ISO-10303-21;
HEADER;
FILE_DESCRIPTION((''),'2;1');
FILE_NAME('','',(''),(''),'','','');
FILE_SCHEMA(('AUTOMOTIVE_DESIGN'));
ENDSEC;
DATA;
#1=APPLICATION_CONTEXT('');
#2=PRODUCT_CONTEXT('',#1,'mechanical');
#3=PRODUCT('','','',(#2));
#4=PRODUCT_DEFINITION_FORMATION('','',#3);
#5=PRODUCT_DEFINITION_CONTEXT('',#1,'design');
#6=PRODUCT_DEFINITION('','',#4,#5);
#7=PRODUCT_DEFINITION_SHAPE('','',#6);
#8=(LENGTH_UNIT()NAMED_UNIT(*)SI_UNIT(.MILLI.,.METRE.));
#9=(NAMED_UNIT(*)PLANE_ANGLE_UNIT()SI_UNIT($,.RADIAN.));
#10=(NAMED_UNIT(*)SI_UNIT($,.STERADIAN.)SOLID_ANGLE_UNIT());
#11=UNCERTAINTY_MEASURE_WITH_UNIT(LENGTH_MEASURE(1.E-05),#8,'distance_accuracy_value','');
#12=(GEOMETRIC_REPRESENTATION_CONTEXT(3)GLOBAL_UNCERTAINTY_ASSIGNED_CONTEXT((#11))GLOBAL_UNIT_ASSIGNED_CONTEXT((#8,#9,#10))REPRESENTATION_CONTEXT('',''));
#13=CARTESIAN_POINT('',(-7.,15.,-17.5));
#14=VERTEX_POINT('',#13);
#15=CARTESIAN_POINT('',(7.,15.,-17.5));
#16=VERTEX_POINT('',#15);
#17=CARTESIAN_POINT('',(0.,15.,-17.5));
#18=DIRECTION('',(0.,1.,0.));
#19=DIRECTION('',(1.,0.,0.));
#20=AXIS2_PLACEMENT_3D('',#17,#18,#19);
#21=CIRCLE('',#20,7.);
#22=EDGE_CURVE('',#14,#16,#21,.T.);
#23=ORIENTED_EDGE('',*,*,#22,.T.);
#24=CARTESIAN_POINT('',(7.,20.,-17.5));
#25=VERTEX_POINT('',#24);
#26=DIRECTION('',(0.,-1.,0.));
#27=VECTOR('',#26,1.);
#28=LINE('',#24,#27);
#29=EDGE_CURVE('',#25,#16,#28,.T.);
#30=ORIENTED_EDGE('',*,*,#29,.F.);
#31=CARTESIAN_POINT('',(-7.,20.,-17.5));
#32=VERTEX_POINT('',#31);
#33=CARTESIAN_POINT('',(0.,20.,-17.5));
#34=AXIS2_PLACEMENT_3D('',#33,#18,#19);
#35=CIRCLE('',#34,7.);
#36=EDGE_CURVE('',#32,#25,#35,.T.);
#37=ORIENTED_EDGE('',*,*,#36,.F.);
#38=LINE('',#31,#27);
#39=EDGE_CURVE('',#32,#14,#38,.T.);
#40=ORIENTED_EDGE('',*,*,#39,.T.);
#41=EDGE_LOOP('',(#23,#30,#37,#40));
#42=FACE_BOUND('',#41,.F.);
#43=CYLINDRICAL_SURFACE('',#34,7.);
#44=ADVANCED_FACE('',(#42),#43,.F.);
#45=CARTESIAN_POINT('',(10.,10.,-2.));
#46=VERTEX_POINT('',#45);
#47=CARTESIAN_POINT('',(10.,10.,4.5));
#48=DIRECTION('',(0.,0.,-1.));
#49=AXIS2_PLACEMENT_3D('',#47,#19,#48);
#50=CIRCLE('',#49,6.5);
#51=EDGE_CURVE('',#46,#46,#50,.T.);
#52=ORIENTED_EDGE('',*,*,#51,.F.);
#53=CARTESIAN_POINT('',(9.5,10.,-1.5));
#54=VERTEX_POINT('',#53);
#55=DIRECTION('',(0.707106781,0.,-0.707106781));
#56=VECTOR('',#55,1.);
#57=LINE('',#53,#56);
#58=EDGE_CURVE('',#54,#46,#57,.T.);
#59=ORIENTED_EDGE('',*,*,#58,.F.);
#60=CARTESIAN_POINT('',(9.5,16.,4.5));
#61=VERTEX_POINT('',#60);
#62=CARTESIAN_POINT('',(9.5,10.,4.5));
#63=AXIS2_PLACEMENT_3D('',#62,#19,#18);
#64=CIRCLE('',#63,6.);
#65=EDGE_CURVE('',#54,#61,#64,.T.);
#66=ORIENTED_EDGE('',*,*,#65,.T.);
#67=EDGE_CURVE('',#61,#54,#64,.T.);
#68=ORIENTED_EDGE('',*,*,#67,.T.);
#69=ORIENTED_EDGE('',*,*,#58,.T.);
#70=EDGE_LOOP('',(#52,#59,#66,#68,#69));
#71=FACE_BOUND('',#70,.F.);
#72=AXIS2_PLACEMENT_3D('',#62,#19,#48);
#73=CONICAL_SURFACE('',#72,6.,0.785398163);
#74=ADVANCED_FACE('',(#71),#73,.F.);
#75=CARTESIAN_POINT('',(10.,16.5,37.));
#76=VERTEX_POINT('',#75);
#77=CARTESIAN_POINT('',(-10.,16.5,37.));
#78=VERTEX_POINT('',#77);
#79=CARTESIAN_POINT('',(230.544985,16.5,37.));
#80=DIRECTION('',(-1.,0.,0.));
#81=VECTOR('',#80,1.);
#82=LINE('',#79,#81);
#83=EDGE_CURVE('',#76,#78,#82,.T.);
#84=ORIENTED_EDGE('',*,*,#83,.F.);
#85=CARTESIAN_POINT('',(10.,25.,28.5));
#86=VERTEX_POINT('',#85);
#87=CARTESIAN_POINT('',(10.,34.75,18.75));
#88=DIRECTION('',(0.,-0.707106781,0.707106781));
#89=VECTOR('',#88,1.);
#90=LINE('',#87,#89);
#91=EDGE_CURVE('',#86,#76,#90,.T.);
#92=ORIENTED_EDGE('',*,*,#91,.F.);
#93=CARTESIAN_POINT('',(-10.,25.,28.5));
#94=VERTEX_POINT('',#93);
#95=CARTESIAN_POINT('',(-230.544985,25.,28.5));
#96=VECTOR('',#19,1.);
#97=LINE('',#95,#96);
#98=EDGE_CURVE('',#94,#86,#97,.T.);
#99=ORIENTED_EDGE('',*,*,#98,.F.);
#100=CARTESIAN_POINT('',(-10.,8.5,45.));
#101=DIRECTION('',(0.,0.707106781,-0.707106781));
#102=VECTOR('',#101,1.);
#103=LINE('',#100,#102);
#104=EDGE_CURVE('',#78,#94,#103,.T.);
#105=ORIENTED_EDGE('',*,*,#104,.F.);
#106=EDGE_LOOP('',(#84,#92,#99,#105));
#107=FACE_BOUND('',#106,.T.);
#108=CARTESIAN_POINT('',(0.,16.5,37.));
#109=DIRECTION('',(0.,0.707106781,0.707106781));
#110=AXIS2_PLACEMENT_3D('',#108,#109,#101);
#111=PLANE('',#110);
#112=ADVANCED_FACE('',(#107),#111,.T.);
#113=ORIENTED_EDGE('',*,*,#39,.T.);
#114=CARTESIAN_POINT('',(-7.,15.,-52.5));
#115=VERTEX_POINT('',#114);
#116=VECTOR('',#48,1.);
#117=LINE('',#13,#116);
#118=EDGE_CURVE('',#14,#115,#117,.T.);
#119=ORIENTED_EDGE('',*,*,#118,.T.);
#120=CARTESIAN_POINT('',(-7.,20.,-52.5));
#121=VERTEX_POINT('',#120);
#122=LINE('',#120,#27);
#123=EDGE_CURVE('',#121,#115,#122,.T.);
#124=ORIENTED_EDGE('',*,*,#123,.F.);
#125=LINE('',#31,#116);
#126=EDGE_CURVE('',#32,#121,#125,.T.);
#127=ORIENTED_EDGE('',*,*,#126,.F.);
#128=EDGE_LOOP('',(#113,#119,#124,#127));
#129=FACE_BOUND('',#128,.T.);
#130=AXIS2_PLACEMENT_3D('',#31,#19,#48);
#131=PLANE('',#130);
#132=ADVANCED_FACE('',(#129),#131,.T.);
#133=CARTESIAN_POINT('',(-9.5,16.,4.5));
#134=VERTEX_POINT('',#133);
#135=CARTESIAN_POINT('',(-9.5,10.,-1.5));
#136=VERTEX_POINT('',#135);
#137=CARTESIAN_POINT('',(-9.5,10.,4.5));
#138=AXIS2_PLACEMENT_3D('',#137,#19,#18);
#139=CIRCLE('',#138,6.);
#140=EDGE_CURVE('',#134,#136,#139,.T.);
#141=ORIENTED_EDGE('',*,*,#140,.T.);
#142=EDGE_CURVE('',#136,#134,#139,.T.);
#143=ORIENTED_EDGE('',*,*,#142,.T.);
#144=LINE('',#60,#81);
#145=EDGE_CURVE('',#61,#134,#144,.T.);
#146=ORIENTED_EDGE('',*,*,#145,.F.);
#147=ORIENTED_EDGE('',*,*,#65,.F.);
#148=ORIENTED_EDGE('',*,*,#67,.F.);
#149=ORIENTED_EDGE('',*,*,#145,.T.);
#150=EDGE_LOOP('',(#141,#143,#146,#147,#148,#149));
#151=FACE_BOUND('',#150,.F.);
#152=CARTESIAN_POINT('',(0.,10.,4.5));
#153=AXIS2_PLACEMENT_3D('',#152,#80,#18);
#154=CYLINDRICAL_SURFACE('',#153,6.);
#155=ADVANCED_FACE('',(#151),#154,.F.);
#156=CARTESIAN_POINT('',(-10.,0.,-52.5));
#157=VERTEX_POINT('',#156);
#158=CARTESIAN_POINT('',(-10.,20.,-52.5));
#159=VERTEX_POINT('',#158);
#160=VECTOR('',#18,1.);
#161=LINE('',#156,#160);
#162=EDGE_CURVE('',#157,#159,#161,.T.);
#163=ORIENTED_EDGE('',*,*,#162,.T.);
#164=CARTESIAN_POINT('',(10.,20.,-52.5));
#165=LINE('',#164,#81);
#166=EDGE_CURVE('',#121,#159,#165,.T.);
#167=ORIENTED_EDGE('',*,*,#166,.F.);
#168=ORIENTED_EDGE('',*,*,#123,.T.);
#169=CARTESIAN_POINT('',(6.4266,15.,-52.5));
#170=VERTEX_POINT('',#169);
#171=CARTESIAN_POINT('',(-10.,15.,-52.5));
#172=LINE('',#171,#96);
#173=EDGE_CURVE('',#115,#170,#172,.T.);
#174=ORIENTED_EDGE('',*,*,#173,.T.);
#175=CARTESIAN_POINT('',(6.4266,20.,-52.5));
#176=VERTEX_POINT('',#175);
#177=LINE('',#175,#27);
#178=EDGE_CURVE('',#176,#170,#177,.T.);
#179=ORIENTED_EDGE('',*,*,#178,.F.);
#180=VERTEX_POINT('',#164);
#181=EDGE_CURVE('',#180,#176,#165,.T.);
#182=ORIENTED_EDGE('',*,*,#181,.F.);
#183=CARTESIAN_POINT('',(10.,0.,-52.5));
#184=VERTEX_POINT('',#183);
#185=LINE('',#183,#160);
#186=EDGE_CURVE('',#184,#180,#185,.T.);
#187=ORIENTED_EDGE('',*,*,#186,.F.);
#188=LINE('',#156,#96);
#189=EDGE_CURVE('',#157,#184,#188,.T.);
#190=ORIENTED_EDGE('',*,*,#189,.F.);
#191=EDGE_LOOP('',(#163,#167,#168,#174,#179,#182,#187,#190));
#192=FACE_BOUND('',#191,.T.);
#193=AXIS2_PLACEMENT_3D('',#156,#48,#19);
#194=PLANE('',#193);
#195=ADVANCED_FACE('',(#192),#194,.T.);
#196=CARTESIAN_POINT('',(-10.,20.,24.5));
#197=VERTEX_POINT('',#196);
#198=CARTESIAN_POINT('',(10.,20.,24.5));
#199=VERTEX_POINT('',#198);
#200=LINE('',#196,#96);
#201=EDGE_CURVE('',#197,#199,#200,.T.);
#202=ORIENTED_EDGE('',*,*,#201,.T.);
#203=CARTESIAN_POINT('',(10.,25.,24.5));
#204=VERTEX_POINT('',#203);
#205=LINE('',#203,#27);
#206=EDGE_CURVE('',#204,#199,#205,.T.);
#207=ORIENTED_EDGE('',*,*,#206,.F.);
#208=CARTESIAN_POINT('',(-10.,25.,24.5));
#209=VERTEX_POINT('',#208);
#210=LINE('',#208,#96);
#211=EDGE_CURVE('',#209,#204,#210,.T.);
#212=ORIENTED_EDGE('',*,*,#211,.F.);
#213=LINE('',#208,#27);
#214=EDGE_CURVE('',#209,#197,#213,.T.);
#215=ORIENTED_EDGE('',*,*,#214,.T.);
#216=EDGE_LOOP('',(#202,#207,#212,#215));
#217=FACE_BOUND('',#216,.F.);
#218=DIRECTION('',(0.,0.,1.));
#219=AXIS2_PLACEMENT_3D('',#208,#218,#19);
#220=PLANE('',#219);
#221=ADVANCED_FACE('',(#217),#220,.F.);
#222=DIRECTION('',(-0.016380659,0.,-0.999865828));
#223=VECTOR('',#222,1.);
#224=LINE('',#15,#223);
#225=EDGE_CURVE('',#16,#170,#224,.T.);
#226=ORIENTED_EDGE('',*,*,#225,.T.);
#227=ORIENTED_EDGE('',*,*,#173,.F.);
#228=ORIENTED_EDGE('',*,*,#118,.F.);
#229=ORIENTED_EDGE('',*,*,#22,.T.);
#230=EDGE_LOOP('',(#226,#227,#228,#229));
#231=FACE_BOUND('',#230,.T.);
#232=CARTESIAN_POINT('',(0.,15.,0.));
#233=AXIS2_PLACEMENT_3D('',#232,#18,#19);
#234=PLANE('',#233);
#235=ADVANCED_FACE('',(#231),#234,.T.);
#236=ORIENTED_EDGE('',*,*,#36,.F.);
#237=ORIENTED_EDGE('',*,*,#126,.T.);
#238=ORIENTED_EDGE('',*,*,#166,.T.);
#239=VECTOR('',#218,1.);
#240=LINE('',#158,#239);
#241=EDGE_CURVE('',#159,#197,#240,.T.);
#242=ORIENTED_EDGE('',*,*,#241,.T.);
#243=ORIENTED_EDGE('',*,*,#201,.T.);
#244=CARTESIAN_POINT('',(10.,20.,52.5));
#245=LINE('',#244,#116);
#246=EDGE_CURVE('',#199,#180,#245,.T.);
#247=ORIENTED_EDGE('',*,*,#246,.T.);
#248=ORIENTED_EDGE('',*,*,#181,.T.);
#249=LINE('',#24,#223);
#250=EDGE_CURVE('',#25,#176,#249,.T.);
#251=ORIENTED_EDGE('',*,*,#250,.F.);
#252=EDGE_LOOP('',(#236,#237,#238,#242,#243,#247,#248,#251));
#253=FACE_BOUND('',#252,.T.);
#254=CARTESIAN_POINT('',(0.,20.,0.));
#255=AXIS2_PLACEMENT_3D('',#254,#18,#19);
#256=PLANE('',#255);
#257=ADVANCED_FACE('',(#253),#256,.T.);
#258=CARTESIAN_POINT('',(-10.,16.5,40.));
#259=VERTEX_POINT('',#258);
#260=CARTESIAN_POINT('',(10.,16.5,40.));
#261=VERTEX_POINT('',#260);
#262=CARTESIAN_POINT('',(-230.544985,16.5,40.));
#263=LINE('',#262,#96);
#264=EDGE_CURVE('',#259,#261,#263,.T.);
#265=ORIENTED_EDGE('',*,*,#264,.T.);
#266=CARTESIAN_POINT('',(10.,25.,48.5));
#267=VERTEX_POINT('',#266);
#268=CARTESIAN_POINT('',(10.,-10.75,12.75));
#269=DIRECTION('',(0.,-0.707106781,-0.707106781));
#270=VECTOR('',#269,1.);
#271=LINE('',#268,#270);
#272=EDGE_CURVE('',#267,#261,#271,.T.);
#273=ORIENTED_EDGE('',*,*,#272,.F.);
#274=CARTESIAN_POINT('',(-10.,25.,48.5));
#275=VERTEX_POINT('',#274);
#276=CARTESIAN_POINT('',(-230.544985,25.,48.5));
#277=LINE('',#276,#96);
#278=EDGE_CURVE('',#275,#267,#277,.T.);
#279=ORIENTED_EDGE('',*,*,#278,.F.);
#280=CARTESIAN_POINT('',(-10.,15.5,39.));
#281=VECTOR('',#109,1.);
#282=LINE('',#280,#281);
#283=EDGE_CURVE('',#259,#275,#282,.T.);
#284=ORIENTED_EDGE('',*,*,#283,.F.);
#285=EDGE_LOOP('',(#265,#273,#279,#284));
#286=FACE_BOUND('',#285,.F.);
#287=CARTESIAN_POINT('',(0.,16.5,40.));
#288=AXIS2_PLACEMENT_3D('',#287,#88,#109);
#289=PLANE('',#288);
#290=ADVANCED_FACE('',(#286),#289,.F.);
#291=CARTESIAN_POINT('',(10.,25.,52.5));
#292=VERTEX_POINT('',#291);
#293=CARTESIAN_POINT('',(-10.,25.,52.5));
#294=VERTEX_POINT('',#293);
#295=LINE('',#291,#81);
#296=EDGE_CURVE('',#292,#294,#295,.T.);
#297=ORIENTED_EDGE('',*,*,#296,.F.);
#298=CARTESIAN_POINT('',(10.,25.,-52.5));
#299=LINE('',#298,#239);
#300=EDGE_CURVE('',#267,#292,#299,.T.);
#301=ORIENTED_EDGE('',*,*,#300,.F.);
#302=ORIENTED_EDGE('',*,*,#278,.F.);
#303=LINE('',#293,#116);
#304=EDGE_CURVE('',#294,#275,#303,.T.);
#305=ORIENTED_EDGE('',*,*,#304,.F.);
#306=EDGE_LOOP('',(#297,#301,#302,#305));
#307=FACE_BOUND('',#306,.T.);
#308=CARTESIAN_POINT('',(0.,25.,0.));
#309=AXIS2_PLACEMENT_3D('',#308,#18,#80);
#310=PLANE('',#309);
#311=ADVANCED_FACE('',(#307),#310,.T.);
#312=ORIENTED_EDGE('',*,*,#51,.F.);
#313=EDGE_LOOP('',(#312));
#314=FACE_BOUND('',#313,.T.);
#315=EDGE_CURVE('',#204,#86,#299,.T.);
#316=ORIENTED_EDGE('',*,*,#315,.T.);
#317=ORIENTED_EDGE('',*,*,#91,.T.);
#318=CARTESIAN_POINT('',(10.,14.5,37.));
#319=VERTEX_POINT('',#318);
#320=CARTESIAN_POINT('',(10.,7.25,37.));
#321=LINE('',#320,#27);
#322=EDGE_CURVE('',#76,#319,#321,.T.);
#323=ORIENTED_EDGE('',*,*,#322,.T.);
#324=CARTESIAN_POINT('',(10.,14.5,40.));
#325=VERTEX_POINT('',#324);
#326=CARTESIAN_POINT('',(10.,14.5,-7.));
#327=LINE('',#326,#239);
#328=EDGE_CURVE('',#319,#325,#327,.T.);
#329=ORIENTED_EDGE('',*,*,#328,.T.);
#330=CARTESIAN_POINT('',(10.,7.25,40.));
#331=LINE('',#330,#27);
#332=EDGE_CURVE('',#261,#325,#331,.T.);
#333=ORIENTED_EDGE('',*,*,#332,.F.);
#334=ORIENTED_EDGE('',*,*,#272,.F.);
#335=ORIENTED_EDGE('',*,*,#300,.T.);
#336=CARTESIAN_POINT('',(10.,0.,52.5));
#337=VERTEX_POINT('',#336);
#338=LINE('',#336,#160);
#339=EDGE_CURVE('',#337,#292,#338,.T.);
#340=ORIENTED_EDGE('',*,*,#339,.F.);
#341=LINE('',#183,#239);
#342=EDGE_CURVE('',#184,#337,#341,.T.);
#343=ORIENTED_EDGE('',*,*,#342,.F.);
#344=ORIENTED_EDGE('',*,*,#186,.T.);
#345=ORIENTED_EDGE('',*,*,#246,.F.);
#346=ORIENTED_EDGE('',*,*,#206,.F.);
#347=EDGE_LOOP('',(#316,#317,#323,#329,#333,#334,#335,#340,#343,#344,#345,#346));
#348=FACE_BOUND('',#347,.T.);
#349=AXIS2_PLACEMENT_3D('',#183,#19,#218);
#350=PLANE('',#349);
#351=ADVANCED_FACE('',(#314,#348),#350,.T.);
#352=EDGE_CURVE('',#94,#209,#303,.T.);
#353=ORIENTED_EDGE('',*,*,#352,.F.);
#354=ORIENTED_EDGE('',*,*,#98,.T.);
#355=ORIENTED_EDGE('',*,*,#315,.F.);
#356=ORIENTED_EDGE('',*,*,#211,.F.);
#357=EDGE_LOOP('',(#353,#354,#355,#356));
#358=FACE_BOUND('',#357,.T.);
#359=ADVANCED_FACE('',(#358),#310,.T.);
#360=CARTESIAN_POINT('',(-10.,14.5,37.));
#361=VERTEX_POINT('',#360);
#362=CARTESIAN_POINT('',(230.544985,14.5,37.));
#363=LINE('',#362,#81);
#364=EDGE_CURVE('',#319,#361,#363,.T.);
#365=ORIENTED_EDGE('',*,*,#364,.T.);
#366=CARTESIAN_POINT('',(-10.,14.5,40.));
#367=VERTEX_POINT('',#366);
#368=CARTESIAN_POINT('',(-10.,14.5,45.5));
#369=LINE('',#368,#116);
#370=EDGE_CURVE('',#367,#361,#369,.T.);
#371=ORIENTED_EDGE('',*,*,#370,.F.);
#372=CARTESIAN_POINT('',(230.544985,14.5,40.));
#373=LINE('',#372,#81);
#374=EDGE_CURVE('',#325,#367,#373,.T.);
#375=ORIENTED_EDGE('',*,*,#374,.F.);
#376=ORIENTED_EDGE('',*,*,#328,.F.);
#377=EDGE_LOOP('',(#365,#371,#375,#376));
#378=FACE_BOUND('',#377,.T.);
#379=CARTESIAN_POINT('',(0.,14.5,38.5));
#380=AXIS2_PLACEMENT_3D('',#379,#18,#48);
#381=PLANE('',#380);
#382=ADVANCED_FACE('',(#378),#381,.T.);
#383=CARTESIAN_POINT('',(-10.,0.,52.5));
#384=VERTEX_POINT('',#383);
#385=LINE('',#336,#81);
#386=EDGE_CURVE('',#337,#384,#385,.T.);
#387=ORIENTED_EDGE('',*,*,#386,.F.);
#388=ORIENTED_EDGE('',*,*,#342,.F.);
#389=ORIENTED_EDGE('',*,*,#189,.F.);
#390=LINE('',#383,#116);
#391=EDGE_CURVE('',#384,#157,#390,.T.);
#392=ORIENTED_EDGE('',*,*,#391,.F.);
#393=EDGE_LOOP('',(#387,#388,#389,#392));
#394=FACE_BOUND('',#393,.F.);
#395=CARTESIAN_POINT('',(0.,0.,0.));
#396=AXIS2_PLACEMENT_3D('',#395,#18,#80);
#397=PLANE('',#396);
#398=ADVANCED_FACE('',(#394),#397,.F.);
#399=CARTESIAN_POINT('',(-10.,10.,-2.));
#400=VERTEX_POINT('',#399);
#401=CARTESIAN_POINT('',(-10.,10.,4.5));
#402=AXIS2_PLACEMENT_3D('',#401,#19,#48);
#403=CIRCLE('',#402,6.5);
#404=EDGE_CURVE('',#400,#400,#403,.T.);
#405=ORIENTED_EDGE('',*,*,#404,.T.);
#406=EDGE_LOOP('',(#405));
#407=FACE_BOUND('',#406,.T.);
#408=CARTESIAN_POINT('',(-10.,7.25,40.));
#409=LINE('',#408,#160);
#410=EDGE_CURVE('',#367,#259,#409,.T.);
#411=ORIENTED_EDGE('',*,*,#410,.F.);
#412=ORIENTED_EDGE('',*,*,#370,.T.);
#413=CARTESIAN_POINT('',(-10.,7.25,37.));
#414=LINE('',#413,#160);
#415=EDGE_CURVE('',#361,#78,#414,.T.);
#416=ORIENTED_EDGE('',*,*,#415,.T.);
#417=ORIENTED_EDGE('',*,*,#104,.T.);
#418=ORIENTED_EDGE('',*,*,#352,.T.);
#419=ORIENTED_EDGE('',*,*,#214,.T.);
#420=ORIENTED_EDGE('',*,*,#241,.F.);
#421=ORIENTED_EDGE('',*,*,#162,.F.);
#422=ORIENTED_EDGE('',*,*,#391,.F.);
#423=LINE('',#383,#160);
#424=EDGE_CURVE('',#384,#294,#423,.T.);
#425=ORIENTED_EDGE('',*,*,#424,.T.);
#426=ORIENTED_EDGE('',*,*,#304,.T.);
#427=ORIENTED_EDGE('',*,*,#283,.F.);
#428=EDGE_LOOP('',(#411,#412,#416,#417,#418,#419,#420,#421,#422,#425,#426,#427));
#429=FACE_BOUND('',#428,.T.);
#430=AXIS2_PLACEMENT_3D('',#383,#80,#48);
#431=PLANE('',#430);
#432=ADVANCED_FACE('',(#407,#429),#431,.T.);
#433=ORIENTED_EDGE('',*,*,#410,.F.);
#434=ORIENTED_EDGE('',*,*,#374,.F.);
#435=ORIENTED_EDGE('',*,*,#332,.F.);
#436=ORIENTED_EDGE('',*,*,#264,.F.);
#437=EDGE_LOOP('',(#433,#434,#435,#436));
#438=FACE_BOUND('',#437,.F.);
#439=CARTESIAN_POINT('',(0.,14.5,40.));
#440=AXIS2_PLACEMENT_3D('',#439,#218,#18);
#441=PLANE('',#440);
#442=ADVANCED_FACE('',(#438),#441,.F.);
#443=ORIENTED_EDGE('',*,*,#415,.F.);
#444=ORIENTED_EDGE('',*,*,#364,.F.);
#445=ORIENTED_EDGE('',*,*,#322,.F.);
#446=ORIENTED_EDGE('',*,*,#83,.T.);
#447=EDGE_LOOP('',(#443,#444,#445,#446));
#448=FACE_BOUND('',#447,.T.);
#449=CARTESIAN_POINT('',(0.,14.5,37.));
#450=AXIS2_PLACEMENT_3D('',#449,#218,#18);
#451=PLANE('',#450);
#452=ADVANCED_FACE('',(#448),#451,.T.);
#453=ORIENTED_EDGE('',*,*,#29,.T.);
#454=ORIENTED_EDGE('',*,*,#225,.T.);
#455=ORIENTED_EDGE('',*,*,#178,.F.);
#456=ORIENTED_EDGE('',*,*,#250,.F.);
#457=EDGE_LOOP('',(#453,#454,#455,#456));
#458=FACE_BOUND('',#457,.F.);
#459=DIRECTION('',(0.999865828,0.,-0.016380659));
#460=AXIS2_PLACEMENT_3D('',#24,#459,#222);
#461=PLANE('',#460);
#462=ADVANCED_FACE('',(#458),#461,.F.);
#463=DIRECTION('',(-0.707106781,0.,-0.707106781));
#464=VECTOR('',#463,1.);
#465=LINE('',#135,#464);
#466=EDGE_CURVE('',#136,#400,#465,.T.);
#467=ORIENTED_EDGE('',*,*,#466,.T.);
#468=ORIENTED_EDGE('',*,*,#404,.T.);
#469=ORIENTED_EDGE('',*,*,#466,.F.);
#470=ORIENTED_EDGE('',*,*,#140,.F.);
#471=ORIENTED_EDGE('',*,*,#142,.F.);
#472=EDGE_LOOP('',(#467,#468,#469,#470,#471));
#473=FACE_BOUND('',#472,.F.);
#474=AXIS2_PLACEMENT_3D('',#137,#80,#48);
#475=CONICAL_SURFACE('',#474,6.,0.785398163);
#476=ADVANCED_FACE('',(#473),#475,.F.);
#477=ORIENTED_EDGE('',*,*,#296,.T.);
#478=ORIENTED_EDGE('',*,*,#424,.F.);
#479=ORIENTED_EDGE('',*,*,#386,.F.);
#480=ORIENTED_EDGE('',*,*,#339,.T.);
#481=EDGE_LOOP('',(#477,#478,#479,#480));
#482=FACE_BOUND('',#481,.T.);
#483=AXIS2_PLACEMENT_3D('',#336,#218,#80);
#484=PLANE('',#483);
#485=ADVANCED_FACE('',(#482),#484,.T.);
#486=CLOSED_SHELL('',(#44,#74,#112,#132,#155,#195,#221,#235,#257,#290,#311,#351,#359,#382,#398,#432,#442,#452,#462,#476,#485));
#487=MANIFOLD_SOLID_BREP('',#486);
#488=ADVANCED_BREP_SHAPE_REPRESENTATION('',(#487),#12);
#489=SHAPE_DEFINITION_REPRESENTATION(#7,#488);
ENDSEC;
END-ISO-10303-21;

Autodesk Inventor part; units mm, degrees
ref_plane "YZ Plane" through (0, 0, 0) normal (1, 0, 0) x (0, 1, 0)
ref_plane "XY Plane" through (0, 0, 0) normal (0, 0, 1) x (1, 0, 0)
sketch "草图1" plane through (0, 0, 0) normal (0, 1, 0) x (-1, 0, 0)
  line L0 (10, -52.5) -> (-10, -52.5)
  line L1 (-10, -52.5) -> (-10, 52.5)
  line L2 (-10, 52.5) -> (10, 52.5)
  line L3 (10, 52.5) -> (10, -52.5)
  line L4 (10, -52.5) -> (-10, 52.5) construction
  line L5 (-10, -52.5) -> (10, 52.5) construction
  point P0 (0, 0)
  dimension "d0" = 20
  dimension "d1" = 105
extrude "拉伸1" add sketch "草图1" along normal blind 25
sketch "草图3" plane through (0, 25, 0) normal (0, 1, 0) x (1, 0, 0)
  line L0 (10, -52.5) -> (10, 52.5) projected
  line L1 (10, 52.5) -> (-10, 52.5) projected
  line L2 (-10, 52.5) -> (-10, -52.5) projected
  line L3 (-10, 52.5) -> (-10, -52.5) projected
  line L4 (-10, -52.5) -> (10, -52.5) projected
  line L5 (10, -52.5) -> (10, 52.5) projected
  line L6 (-10, 52.5) -> (-10, -28.5) projected
  line L7 (-10, -24.5) -> (10, -24.5)
  line L8 (10, -52.5) -> (10, 52.5) projected
  line L9 (10, 52.5) -> (-10, 52.5) projected
  line L10 (-10, -52.5) -> (10, -52.5) projected
  point P0 (0, 0)
  point P1 (10, -28.5)
  point P2 (10, -48.5)
  dimension "d12" = 28
extrude "拉伸3" cut sketch "草图3" against normal blind 5 contours L7 L2 L1 L0
sketch "草图4" plane through (0, 20, 0) normal (0, 1, 0) x (1, 0, 0)
  point P0 (0, 0)
sketch "草图6" plane through (0, 0, 0) normal (1, 0, 0) x (0, 1, 0)
  line L0 (0, -52.5) -> (20, -52.5) projected
  line L1 (0, -52.5) -> (0, 52.5) projected
  circle A0 centre (10, 4.5) radius 6
  point P0 (0, 0)
  point P1 (15, -52.5)
  dimension "d18" = 57
  dimension "d19" = 10
  dimension "d20" = 12
extrude "拉伸5" cut sketch "草图6" along normal mid plane 19
ref_plane "工作平面1" through (0, 10, 0) normal (0, 1, 0) x (-1, 0, 0)
sketch "草图8" plane through (0, 10, 0) normal (0, 1, 0) x (-1, 0, 0)
  line L0 (10, 52.5) -> (-10, 52.5) projected
  line L1 (10, -52.5) -> (10, 52.5) projected
  line L2 (-10, -52.5) -> (10, -52.5) projected
  line L3 (-10, 52.5) -> (-10, -52.5) projected
  line L4 (9.5, -1.5) -> (9.5, 10.5) projected
  line L5 (-9.5, 10.5) -> (-9.5, -1.5) projected
  line L6 (9.5, -1.5) -> (9.5, 10.5) projected
  line L7 (9.5, 4.5) -> (10, 4.5)
  line L8 (10, -52.5) -> (10, 52.5) projected
  line L9 (9.5, -1.5) -> (10, -2)
  line L10 (10, -2) -> (10, 4.5)
  line L11 (9.5, 4.5) -> (9.5, -1.5)
  line L12 (10, 4.5) -> (-10, 4.5)
  line L13 (-10, 52.5) -> (-10, -52.5) projected
  point P0 (0, 0)
  dimension "d24" = 135
revolve "旋转1" cut sketch "草图8" angle 360 about axis through (-10, 10, 4.5) along (1, 0, 0) contours L1 L9 L4 L7
mirror "镜像1" about plane through (0, 0, 0) normal (1, 0, 0) of "旋转1"
sketch "草图9" plane through (0, 0, 0) normal (1, 0, 0) x (0, 1, 0)
  line L0 (0, -52.5) -> (20, -52.5) projected
  line L1 (25, 24.5) -> (25, 52.5) projected
  line L2 (14.5, 38.5) -> (31.5646, 38.5)
  line L3 (14.5, 38.5) -> (14.5, 37)
  line L4 (14.5, 37) -> (16.5, 37)
  line L5 (16.5, 37) -> (25, 28.5)
  line L6 (25, 28.5) -> (25, 38.5)
  line L7 (25, 52.5) -> (25, 24.5)
  line L8 (14.5, 40) -> (16.5, 40)
  line L9 (16.5, 40) -> (25, 48.5)
  line L10 (14.5, 40) -> (14.5, 38.5)
  point P0 (0, 0)
  point P1 (15, -52.5)
  dimension "d26" = 91
  dimension "d27" = 10.5
  dimension "d28" = 1.5
  dimension "d29" = 2
  dimension "d30" = 45
extrude "拉伸6" cut sketch "草图9" along normal through all both and the other way through all
sketch "草图10" plane through (0, 20, 0) normal (0, 1, 0) x (1, 0, 0)
  line L0 (-10, 52.5) -> (-10, -52.5) projected
  line L1 (-10, 17.5) -> (10, 17.5)
  line L2 (10, -52.5) -> (10, 52.5) projected
  line L3 (-10, 52.5) -> (10, 52.5) projected
  circle A0 centre (0, 17.5) radius 7
  line L4 (-7, 17.5) -> (-7, 52.5)
  line L5 (10, 52.5) -> (-10, 52.5) projected
  line L6 (7, 17.5) -> (6.4266, 52.5)
  point P0 (0, 0)
  point P1 (6.9962, 17.7293)
  dimension "d33" = 35
  dimension "d34" = 14
extrude "拉伸7" cut sketch "草图10" against normal blind 5 contours L3 L6 L1 L4 | L1 A0
properties part number "5-压铁" material "不锈钢"
